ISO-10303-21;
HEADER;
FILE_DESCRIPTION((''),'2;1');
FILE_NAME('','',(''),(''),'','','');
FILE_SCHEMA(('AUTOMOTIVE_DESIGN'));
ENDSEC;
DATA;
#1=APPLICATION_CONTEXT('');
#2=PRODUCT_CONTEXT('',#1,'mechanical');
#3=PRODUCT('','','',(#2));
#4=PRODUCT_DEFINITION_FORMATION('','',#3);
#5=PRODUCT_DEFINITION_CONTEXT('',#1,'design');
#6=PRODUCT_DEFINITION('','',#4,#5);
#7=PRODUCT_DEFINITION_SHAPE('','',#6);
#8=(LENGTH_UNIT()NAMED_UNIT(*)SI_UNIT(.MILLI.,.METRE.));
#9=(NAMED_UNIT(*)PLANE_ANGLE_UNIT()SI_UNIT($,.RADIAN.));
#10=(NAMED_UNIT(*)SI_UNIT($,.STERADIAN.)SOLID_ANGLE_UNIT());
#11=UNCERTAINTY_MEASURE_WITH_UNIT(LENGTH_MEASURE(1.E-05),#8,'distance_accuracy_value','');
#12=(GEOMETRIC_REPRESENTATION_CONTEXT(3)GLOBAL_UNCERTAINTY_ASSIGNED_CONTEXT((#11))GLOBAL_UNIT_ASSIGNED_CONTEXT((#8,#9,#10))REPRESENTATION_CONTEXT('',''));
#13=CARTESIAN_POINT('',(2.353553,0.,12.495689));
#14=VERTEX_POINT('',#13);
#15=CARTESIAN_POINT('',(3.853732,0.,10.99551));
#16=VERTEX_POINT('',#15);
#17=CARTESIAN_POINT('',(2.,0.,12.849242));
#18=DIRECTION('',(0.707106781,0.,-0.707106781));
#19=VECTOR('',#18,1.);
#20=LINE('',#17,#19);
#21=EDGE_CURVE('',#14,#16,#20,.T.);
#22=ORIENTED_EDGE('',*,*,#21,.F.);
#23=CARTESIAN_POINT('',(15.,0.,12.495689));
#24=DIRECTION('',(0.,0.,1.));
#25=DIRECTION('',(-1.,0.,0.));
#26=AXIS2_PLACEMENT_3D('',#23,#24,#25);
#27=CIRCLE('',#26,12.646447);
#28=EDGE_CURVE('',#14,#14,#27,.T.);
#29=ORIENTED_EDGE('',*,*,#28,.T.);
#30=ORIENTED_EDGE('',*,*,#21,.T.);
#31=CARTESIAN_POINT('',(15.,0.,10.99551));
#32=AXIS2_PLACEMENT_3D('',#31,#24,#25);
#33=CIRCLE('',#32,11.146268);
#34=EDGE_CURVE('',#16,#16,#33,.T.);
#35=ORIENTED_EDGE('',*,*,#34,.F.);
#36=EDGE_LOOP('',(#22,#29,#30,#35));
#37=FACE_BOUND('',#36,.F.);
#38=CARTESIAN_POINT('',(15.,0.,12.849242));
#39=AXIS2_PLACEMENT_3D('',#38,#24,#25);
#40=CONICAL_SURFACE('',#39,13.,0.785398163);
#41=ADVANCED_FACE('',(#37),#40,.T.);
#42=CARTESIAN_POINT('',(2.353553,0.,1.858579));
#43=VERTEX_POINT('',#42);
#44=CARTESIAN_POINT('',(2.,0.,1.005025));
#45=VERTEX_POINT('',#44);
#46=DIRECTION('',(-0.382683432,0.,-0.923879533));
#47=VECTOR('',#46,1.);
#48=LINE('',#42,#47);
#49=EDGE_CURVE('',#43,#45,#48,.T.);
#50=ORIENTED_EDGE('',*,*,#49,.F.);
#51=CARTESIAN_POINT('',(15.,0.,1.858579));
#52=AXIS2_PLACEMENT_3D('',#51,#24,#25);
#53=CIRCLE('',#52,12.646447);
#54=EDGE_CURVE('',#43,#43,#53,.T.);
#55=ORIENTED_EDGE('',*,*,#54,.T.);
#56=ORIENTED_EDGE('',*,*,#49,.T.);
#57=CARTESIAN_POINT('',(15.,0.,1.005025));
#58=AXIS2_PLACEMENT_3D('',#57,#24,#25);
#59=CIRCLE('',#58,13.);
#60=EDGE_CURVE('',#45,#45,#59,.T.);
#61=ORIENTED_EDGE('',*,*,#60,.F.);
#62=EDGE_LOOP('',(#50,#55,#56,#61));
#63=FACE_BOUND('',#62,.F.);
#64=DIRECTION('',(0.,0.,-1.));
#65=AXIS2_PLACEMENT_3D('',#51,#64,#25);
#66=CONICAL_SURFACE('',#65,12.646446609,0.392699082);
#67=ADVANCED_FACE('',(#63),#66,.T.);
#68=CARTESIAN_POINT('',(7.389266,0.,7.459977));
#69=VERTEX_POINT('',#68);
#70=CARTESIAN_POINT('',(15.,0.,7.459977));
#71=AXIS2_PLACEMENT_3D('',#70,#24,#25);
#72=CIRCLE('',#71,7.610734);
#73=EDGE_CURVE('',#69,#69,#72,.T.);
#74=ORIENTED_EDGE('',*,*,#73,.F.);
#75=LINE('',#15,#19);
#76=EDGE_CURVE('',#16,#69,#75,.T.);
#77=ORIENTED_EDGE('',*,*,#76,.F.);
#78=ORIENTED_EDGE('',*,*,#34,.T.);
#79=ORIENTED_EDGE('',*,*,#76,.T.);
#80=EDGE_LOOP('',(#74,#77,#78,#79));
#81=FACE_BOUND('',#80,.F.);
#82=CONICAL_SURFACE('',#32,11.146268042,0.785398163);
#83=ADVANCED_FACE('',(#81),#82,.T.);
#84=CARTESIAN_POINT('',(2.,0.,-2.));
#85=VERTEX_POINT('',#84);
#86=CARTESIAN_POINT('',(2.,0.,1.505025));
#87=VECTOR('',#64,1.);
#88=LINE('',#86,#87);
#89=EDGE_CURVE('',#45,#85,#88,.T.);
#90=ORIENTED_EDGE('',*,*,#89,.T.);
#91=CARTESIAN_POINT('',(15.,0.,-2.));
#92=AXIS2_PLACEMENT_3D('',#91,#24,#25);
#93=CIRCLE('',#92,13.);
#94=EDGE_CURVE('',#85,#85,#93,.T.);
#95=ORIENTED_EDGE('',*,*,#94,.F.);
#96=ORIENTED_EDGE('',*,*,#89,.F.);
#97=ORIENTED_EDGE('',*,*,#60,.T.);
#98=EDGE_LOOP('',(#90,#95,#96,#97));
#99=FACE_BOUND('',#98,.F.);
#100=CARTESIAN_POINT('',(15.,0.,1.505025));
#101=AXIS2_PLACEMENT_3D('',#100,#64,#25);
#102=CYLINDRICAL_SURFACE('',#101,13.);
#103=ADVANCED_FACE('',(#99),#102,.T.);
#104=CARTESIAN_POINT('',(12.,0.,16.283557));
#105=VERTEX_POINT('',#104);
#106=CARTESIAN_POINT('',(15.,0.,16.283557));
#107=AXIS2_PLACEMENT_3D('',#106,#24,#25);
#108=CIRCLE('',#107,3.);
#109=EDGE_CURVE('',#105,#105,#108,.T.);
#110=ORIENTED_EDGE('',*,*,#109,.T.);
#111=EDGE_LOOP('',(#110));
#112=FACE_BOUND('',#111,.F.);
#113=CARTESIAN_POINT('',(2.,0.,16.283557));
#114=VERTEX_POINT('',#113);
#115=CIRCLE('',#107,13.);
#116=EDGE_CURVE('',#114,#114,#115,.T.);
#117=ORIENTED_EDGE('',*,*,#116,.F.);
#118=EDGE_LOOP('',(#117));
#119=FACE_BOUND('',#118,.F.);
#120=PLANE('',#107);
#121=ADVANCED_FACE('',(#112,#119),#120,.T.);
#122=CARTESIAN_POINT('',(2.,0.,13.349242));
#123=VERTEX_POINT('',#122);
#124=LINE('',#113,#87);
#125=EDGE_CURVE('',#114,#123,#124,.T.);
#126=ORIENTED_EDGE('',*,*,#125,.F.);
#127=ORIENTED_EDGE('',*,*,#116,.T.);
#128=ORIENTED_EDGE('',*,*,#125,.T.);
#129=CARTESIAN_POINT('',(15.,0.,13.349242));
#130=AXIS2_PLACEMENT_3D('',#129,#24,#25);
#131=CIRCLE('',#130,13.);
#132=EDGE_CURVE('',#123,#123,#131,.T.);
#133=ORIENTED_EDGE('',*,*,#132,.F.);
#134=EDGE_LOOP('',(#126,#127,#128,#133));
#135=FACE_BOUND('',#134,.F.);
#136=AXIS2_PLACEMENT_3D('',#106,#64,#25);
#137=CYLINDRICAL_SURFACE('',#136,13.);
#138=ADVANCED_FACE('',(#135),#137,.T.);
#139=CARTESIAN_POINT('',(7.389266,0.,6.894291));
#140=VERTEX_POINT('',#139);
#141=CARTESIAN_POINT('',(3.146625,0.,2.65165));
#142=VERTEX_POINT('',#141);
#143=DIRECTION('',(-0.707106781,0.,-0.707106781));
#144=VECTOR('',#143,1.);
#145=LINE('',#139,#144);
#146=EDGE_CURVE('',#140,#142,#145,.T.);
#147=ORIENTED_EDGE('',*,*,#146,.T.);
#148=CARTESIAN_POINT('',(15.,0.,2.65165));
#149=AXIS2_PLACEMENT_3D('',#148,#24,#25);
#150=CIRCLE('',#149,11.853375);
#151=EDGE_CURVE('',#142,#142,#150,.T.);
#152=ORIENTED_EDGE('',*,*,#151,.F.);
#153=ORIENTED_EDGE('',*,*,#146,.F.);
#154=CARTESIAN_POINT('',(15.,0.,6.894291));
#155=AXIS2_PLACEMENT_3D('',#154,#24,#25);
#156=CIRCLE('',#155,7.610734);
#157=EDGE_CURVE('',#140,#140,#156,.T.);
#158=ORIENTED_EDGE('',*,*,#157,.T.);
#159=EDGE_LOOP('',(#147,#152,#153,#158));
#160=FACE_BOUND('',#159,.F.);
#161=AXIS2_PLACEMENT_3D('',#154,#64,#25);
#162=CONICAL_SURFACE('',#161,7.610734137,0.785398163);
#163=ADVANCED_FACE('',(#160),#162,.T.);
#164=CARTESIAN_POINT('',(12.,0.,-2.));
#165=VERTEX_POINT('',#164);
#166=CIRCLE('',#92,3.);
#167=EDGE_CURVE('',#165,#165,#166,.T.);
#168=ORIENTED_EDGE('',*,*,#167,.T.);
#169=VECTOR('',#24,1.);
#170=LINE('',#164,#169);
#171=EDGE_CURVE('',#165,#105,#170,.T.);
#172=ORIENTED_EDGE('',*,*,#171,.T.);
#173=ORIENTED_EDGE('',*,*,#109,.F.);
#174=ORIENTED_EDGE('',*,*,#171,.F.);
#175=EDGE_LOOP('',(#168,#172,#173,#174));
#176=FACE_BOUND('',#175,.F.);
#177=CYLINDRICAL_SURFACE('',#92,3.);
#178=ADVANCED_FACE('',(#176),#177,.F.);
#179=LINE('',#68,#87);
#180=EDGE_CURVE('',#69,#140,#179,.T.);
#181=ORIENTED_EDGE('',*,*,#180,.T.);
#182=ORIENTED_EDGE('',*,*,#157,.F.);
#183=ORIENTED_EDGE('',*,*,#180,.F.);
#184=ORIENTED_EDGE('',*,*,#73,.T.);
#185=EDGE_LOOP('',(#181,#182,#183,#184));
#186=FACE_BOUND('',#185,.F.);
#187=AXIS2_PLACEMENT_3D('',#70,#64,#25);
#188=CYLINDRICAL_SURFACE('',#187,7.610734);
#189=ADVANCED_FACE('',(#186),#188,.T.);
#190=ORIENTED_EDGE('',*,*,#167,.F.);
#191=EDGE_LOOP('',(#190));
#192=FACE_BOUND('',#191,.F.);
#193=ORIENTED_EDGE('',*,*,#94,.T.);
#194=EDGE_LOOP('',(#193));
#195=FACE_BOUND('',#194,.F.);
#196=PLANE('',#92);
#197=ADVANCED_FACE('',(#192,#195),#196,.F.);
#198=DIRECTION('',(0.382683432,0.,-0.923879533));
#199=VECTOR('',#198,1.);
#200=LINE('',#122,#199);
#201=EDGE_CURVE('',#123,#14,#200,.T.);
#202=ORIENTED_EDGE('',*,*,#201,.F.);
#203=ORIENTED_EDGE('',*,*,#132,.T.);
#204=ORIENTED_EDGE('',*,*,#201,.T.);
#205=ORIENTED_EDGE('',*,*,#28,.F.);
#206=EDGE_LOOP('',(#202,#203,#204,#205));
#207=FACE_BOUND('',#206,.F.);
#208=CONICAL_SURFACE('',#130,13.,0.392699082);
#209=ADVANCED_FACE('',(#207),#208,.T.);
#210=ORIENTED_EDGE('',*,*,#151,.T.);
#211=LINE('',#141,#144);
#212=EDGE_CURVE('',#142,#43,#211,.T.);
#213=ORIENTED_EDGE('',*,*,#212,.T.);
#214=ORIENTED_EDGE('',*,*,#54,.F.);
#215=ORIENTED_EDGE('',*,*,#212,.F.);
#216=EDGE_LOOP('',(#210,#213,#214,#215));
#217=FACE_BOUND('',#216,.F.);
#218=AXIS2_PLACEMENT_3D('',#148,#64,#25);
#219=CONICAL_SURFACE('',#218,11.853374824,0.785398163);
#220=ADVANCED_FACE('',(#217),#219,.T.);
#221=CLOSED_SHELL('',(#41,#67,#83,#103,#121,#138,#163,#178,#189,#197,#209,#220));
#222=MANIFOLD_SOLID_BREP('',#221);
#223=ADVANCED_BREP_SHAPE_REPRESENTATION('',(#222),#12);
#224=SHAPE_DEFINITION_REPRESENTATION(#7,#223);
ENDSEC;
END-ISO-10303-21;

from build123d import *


# Not quite as in the source:
# - a fillet or chamfer that OpenCascade refuses, or shapes differently, is made with other operations: its cross-section is extruded or revolved along the edge and cut away or added


with BuildPart() as f1:
    # F0 (on Front) → F1 (revolve)
    with BuildSketch(Plane.XZ):
        Polygon((2, 1.5050252532), (2, 0), (2, -2), (12, -2), (12, 16.28355698), (2, 16.28355698), (2, 14.28355698), (2, 12.8492424049), (3.8537319575, 10.9955104475), (7.3892658634, 7.4599765415), (7.3892658634, 6.8942911166), (3.1466251763, 2.6516504294), align=None)
    revolve(axis=Axis((15, 0, 2.570889245), (0, 0, 1)))

    # F2: chamfer of 0.5 on 2 edges, made by hand

    # F2_s1 → F2_t2 (revolve, cut)
    with BuildSketch(Plane.XZ):
        Polygon((2, 13.3492424049), (2.3535533906, 12.4956890143), (2, 12.8492424049), align=None)
    revolve(axis=Axis((15, 0, 12.8492424049), (0, 0, 1)), mode=Mode.SUBTRACT)

    # F2_s3 → F2_t4 (revolve, cut)
    with BuildSketch(Plane.XZ):
        Polygon((2.3535533906, 1.8585786438), (2, 1.0050252532), (2, 1.5050252532), align=None)
    revolve(axis=Axis((15, 0, 1.5050252532), (0, 0, 1)), mode=Mode.SUBTRACT)


solid = f1.part
